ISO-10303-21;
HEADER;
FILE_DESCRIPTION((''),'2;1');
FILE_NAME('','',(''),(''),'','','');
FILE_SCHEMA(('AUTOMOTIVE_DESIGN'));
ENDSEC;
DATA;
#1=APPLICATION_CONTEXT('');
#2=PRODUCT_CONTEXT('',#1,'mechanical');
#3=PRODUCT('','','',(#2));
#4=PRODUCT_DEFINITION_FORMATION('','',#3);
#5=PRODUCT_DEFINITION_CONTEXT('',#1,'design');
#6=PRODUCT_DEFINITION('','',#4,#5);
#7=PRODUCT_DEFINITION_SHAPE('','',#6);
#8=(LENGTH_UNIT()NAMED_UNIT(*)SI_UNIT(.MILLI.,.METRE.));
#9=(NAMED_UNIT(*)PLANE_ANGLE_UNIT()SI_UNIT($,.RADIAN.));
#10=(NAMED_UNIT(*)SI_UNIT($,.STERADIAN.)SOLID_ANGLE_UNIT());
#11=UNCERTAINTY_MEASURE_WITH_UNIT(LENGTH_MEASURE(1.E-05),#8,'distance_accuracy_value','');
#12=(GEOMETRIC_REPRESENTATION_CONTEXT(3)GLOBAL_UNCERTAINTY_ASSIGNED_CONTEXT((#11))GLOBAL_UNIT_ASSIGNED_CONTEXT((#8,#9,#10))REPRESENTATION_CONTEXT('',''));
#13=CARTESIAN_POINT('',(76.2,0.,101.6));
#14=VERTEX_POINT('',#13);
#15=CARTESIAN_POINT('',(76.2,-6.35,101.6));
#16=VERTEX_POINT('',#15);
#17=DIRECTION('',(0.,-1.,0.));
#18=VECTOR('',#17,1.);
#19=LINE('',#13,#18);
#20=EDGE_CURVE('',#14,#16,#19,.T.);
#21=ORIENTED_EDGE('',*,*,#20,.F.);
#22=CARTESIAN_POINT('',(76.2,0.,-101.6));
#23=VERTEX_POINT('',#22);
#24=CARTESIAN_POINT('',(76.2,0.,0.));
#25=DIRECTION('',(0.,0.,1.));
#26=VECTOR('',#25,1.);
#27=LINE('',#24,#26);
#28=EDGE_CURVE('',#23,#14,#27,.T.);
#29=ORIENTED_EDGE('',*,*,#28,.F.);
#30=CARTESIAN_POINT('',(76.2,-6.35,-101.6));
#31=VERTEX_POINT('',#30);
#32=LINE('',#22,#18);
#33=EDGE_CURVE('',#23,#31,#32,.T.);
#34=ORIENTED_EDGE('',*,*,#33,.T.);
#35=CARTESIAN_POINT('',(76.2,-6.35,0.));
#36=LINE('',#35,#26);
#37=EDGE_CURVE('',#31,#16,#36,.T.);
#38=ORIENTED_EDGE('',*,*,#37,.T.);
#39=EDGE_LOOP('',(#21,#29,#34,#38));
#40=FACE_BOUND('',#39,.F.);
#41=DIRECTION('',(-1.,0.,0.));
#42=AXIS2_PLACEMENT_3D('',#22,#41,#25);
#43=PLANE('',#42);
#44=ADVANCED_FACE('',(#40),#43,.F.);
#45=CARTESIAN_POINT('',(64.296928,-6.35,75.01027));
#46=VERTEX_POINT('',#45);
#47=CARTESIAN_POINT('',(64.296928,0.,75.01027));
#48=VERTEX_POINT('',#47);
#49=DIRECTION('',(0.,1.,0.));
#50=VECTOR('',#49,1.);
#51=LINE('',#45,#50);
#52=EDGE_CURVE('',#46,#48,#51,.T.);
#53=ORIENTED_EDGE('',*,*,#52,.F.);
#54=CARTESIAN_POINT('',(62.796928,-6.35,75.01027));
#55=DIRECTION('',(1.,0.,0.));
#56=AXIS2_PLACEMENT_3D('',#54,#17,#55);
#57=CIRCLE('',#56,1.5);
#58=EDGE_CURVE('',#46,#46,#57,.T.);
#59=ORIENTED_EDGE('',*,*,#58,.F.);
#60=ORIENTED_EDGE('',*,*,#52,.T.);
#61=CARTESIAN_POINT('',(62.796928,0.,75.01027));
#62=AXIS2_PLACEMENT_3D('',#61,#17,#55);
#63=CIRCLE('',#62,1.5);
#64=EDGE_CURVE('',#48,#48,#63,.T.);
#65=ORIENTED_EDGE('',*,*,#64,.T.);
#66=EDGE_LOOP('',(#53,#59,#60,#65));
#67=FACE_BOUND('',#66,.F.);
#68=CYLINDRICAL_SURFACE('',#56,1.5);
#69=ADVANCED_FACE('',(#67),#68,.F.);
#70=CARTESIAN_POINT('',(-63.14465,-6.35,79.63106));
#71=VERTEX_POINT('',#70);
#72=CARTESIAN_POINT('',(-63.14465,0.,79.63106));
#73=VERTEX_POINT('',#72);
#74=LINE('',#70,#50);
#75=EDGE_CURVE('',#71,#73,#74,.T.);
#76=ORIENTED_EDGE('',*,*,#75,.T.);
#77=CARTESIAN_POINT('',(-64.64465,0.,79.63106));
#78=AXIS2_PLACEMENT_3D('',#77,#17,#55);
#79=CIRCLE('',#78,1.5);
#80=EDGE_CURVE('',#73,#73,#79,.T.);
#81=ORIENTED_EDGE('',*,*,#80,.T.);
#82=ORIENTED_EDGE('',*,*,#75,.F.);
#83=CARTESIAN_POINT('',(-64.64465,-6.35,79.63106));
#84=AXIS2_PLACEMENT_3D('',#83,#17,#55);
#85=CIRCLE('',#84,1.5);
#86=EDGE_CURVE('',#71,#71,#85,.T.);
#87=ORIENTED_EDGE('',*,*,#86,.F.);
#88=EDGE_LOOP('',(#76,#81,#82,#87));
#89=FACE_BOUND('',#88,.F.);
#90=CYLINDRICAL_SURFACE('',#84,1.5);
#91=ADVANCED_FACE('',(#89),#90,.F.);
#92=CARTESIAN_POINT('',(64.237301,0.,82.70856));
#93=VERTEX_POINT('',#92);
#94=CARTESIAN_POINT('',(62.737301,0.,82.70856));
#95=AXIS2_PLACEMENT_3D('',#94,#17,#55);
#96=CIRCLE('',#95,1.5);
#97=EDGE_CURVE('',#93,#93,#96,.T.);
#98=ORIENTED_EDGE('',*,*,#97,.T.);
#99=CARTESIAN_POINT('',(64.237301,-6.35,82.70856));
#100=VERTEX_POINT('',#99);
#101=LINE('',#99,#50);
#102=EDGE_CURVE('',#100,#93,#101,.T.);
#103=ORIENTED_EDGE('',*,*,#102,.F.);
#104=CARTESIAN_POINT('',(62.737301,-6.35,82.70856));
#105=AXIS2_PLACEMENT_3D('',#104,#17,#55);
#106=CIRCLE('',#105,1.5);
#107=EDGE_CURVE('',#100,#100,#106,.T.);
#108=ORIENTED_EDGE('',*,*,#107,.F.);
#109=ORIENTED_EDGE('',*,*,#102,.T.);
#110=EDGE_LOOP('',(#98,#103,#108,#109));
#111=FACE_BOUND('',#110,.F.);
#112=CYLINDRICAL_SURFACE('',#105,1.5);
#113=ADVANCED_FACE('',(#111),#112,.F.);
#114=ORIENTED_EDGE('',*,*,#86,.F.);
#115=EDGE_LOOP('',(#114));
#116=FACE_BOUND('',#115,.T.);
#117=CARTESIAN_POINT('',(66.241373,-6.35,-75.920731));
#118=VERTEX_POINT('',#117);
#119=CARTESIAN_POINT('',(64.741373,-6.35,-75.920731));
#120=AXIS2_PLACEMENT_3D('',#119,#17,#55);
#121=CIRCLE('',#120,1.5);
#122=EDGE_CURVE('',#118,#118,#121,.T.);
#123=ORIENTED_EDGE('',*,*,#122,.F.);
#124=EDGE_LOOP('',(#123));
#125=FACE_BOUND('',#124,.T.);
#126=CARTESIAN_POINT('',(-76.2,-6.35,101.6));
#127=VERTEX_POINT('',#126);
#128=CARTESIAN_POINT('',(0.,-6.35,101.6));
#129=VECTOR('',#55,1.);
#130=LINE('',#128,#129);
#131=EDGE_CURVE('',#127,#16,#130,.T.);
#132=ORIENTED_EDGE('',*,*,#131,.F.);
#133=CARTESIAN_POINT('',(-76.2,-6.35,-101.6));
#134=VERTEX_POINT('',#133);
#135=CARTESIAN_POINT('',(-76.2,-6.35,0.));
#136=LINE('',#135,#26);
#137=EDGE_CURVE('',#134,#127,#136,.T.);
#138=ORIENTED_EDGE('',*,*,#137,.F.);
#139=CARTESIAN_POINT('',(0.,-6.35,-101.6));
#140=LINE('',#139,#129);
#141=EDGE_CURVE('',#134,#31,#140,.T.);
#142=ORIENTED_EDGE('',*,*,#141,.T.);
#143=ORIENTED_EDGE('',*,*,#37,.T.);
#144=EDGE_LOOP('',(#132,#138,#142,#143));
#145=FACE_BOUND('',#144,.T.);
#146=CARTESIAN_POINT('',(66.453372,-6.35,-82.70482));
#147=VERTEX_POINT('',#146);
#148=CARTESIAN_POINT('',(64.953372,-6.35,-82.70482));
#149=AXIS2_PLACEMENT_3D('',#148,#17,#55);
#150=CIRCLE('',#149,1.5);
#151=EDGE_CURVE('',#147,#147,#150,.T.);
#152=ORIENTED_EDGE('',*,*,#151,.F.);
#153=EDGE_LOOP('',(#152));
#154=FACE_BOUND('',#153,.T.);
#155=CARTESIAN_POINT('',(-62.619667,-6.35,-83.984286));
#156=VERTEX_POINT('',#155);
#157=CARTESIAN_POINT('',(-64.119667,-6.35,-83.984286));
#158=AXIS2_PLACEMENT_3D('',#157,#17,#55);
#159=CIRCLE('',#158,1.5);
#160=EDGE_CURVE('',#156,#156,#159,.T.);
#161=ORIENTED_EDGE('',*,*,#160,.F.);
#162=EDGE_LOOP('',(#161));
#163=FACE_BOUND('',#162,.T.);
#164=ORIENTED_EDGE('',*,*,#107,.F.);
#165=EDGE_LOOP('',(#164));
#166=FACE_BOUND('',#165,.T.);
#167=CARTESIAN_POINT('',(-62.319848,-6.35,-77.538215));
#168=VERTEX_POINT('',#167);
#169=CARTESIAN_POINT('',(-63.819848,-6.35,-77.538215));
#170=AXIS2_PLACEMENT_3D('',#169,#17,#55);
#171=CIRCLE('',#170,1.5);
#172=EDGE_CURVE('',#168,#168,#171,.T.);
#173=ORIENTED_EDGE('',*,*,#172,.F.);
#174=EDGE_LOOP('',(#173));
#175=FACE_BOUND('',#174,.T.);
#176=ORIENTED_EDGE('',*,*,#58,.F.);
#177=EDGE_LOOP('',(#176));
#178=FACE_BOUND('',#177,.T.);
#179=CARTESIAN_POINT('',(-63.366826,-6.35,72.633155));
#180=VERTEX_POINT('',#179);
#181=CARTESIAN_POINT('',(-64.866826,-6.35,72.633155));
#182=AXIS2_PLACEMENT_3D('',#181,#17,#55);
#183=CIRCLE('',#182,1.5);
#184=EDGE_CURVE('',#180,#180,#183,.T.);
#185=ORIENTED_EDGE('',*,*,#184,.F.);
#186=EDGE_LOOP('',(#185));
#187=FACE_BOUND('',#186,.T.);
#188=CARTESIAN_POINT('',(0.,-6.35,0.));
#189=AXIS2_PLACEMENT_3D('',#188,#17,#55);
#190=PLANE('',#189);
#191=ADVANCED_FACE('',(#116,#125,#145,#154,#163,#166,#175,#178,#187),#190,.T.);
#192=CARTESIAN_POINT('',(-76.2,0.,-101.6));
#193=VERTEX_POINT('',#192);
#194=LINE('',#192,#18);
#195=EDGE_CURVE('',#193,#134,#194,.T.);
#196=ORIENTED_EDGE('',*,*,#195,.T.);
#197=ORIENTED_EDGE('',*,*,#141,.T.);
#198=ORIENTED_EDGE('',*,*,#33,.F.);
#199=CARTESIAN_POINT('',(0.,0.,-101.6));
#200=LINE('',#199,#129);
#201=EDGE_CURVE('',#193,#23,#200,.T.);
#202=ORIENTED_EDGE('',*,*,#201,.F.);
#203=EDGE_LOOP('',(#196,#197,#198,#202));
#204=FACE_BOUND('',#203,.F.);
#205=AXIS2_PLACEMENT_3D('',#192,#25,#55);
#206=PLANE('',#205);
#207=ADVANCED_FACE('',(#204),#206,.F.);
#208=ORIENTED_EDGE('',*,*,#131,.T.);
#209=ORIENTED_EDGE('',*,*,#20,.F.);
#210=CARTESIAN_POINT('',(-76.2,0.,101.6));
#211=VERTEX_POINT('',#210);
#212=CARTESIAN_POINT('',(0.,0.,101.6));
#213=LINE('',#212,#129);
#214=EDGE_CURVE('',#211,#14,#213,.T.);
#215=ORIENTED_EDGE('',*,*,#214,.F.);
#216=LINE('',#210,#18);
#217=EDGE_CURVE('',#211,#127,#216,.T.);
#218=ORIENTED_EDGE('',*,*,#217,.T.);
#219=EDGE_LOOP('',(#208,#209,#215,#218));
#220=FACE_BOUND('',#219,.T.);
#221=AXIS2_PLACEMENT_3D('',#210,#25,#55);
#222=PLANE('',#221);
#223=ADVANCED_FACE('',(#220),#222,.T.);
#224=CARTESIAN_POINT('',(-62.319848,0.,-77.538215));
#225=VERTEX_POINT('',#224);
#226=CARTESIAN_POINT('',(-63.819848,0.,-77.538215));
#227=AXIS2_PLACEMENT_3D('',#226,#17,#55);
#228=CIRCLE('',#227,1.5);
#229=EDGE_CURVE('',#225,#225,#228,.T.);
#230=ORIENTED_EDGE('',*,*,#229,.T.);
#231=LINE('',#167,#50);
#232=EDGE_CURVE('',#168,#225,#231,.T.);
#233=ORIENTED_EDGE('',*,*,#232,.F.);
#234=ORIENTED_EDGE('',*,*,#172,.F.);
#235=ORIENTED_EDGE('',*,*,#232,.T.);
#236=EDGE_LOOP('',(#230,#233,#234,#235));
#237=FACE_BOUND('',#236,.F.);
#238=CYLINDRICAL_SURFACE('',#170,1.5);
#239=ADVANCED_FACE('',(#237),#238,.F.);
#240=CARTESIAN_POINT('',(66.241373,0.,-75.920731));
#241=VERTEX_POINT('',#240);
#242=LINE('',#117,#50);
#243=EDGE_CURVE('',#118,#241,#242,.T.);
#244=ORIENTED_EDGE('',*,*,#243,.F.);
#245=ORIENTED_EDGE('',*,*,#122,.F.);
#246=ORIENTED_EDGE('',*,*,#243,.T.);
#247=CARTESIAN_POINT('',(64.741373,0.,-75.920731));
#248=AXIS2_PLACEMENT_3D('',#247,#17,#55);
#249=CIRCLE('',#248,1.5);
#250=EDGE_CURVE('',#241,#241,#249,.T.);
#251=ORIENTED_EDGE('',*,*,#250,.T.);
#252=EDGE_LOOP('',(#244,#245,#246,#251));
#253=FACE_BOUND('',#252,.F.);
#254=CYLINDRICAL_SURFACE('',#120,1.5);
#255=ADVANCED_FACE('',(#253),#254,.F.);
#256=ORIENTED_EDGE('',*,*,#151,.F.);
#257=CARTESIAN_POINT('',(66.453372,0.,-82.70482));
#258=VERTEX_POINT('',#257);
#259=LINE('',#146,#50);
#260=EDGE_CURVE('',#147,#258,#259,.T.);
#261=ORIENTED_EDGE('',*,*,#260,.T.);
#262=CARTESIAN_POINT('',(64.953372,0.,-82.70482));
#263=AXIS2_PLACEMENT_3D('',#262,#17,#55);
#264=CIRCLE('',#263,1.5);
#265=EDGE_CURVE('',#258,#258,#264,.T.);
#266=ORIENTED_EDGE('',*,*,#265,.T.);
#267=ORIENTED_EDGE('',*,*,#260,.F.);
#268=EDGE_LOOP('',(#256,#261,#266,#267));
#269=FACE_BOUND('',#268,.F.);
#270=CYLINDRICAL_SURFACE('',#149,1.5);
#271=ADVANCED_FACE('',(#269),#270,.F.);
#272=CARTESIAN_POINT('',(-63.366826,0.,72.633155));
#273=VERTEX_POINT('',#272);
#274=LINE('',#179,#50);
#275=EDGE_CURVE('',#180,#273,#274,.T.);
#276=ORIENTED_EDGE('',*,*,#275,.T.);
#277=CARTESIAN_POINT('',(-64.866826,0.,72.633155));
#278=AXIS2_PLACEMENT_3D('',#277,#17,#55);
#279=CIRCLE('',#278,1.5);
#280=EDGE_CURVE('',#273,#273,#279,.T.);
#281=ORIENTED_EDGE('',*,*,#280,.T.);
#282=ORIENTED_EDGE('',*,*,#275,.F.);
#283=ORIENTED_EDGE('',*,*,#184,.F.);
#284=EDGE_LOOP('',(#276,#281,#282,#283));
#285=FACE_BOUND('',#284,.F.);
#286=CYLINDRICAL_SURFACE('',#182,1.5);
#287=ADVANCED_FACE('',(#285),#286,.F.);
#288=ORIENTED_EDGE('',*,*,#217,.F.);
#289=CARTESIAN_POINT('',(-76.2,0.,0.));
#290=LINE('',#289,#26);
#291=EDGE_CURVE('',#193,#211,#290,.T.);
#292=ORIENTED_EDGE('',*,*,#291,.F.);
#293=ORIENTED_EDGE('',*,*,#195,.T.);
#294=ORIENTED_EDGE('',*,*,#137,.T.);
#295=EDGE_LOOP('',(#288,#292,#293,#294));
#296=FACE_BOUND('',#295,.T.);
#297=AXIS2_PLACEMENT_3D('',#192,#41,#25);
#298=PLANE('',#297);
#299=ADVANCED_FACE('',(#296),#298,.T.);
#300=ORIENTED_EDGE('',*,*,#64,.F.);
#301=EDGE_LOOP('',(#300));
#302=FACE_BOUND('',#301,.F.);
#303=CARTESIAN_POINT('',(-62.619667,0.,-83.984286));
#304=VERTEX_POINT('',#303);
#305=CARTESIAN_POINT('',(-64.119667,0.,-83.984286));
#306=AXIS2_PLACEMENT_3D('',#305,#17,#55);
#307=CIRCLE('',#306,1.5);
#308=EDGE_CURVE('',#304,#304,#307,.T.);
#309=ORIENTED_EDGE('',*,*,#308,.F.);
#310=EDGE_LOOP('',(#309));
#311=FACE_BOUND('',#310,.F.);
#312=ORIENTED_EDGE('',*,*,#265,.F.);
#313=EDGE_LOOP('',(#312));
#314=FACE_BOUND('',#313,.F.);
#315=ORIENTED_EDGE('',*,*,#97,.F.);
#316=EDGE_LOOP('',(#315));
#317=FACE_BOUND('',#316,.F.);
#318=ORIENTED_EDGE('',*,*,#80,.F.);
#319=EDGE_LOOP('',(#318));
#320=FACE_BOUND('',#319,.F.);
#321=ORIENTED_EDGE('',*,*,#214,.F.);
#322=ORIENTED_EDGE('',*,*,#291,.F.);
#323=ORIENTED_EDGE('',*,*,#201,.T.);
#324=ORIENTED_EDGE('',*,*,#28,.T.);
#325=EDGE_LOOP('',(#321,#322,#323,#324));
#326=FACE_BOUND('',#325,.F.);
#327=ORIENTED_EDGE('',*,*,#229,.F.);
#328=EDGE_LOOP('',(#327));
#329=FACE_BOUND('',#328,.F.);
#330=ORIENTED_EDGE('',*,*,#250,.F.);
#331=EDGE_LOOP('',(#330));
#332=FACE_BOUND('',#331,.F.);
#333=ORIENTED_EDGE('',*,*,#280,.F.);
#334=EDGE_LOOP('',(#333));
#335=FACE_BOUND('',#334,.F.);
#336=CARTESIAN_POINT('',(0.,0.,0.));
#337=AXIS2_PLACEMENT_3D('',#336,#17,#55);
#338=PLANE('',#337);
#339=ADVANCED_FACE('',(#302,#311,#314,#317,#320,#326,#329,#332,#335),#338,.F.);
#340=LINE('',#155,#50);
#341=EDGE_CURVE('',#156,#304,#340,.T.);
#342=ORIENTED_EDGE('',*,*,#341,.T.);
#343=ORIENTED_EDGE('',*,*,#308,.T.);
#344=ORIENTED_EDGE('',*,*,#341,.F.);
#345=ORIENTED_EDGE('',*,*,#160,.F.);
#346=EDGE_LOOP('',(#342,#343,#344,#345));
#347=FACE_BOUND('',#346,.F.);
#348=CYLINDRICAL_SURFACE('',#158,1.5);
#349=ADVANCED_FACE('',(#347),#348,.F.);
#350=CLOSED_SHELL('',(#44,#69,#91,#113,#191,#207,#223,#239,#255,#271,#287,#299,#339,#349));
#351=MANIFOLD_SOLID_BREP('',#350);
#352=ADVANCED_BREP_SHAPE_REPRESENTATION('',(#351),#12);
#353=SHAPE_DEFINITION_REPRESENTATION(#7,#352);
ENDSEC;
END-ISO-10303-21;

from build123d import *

# Parameters (mm, degrees)
F0_W      = 152.4
F0_H      = 203.2
F1_DEPTH  = 6.35
F3_R      = 1.5
F3_R_2    = 0.15
F6_DEPTH  = 6.35
F4_R      = 1.5
F7_DEPTH  = 6.35
F8_R      = 1.5
F9_DEPTH  = 6.35
F10_R     = 1.5
F11_DEPTH = 6.35
F12_R     = 1.5
F13_DEPTH = 6.35


# Not quite as in the source:
# - the program builds the solid bodies; features that only make, move or delete a surface that nothing else refers to are left out


with BuildPart() as f1:
    # F0 (on Front) → F1 (new body)
    with BuildSketch(Plane.XZ):
        Rectangle(F0_W, F0_H)
    extrude(amount=F1_DEPTH)

    # F3 (on face) → F6 (cut)
    with BuildSketch(Plane.XZ.offset(6.35)):
        with Locations((-64.6446496248, 79.6310603619)):
            Circle(F3_R)
        with Locations((-64.5674839616, 72.9324966669)):
            Circle(F3_R_2)
    extrude(amount=-F6_DEPTH, mode=Mode.SUBTRACT)

    # F4 (on face) → F7 (cut)
    with BuildSketch(Plane.XZ.offset(6.35)):
        with Locations((-64.8668259382, 72.6331546903)):
            Circle(F4_R)
    extrude(amount=-F7_DEPTH, mode=Mode.SUBTRACT)

    # F8 (on face) → F9 (cut)
    with BuildSketch(Plane.XZ.offset(6.35)):
        with Locations((62.737300992, 82.7085599303)):
            Circle(F8_R)
        with Locations((62.7969279885, 75.0102698803)):
            Circle(F8_R)
    extrude(amount=-F9_DEPTH, mode=Mode.SUBTRACT)

    # F10 (on face) → F11 (cut)
    with BuildSketch(Plane.XZ.offset(6.35)):
        with Locations((-63.819848001, -77.5382146239)):
            Circle(F10_R)
        with Locations((-64.1196668148, -83.984285593)):
            Circle(F10_R)
    extrude(amount=-F11_DEPTH, mode=Mode.SUBTRACT)

    # F12 (on face) → F13 (cut)
    with BuildSketch(Plane.XZ.offset(6.35)):
        with Locations((64.7413730621, -75.9207308292)):
            Circle(F12_R)
        with Locations((64.9533718824, -82.7048197389)):
            Circle(F12_R)
    extrude(amount=-F13_DEPTH, mode=Mode.SUBTRACT)


solid = f1.part
